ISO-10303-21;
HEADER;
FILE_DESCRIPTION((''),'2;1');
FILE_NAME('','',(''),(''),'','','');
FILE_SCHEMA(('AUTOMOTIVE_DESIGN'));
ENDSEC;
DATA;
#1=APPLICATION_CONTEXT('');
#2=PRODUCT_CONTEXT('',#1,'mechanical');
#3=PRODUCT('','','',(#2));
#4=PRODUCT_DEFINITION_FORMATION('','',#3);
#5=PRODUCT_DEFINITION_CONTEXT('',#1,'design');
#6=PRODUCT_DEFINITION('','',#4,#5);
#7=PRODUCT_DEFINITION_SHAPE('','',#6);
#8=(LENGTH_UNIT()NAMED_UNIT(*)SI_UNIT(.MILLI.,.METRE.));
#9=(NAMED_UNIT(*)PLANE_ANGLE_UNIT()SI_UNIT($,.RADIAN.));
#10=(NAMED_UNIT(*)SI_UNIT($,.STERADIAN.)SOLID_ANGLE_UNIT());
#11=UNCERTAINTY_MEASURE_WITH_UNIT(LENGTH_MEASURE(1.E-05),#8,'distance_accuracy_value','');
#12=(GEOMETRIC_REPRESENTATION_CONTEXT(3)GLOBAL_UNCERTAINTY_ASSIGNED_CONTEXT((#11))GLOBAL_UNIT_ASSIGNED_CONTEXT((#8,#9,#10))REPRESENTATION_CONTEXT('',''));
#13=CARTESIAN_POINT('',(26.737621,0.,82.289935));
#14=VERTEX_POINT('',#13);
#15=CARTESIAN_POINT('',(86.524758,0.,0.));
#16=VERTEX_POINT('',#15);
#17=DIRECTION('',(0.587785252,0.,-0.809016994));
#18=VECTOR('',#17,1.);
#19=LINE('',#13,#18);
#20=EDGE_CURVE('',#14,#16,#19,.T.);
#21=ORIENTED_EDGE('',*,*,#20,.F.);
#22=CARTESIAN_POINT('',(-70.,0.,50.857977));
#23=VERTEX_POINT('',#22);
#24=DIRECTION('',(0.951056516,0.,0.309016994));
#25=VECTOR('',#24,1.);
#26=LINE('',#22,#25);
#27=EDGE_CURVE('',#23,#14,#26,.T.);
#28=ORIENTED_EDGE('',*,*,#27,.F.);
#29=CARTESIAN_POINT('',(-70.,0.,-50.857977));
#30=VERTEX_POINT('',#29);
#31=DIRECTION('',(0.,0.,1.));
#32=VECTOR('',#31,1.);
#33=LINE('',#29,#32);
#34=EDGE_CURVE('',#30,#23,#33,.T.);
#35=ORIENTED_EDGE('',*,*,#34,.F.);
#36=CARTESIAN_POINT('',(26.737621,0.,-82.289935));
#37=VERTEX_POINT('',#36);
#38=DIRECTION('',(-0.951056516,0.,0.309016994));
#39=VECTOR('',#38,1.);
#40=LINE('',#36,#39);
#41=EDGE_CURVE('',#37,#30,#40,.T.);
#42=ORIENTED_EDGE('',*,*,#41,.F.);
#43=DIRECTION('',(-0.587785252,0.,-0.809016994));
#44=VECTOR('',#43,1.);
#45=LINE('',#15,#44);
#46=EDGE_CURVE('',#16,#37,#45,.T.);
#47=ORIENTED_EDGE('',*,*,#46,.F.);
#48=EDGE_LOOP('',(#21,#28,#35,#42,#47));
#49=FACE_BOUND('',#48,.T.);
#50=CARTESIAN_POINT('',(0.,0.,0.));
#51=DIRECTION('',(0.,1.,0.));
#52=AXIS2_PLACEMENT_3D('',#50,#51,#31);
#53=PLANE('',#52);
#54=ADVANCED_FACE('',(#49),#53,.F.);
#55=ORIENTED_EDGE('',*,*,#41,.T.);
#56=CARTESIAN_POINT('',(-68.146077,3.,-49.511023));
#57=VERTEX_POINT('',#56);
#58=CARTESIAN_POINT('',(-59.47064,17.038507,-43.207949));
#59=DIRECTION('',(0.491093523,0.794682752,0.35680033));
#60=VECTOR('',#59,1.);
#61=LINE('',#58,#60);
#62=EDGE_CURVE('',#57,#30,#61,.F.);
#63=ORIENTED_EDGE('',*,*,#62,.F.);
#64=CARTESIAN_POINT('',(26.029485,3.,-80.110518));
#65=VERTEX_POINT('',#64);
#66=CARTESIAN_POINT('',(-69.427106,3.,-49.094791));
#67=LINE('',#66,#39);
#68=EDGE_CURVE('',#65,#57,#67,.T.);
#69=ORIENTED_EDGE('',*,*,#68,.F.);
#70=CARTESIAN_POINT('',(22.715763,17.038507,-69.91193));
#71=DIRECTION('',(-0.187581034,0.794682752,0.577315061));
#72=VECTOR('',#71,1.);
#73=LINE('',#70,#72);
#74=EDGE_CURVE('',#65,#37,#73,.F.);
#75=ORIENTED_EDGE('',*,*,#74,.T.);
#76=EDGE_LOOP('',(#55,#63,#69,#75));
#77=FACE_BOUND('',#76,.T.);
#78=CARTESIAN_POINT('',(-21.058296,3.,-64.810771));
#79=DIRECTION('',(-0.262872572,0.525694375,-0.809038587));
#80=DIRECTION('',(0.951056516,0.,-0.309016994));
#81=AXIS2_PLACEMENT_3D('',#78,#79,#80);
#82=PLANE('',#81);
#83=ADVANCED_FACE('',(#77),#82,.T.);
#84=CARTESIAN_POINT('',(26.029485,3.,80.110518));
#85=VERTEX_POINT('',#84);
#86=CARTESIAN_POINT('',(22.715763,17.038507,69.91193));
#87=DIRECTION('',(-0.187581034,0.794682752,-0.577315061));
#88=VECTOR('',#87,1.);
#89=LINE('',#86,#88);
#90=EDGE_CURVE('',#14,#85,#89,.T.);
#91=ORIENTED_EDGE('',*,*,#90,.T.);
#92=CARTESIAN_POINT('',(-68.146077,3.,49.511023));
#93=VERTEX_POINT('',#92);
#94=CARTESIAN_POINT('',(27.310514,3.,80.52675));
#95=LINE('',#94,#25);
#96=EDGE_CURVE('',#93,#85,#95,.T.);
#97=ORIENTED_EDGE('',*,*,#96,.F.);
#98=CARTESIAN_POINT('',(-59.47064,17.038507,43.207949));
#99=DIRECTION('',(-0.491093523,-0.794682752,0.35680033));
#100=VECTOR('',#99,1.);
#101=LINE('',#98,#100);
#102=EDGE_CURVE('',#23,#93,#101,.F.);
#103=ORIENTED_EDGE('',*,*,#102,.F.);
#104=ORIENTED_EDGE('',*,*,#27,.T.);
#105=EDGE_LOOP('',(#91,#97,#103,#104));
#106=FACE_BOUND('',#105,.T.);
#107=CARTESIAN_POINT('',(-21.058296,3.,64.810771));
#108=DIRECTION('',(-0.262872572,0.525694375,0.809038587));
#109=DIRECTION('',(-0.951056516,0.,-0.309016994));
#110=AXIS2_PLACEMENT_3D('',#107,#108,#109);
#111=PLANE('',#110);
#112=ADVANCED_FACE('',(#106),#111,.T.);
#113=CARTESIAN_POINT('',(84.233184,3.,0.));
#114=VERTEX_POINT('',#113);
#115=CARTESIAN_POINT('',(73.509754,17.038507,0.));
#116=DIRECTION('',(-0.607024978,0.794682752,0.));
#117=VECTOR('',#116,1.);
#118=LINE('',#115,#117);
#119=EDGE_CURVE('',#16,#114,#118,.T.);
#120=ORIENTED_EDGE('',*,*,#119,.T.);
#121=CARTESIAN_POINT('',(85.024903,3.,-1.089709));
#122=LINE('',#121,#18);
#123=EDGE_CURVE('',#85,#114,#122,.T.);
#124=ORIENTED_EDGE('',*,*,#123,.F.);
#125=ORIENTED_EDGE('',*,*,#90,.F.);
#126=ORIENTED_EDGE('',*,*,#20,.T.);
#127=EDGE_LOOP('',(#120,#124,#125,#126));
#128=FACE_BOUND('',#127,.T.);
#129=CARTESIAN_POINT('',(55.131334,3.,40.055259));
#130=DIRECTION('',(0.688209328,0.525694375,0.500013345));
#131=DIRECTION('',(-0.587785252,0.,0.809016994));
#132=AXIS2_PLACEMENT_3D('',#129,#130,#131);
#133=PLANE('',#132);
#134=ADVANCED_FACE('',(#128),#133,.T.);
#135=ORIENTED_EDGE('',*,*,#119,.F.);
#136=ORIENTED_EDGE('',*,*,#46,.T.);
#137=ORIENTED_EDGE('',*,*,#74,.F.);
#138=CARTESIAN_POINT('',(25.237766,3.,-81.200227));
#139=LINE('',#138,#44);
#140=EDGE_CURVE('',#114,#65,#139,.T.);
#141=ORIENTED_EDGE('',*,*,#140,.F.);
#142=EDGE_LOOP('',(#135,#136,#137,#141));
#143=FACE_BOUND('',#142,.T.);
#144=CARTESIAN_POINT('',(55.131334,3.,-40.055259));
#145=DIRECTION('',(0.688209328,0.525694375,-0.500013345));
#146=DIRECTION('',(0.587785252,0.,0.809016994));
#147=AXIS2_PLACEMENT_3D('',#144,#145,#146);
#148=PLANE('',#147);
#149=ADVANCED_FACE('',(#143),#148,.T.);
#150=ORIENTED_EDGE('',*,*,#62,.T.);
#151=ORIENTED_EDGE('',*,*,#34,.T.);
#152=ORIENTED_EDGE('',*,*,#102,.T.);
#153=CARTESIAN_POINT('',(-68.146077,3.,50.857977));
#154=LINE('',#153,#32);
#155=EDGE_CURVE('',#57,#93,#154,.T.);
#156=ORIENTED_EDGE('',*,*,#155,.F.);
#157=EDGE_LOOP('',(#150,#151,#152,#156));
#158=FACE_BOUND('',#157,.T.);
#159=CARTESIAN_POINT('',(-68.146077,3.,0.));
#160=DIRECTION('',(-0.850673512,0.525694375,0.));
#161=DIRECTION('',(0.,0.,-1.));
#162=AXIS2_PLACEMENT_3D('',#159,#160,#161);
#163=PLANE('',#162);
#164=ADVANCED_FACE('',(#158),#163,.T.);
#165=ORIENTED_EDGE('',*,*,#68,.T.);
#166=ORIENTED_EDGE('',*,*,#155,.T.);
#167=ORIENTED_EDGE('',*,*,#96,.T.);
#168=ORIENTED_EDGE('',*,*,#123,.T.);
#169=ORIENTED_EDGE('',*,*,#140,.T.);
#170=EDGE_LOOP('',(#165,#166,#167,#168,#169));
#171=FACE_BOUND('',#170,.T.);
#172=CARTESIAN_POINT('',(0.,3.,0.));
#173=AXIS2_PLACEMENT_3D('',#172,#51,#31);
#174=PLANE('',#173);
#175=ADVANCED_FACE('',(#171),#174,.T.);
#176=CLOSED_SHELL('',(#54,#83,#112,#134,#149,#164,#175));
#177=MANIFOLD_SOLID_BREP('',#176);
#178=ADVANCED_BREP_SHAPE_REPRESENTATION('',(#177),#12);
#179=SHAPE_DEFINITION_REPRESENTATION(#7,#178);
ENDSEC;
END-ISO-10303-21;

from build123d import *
from OCP.BRepFilletAPI import BRepFilletAPI_MakeChamfer

# Parameters (mm, degrees)
BOSS_EXTRUDE1_DEPTH = 3
CHAMFER1_SIZE       = 3
CHAMFER1_SIZE_2     = 1.853922924


with BuildPart() as part:
    # Sketch1 → Boss-Extrude1 (new body)
    with BuildSketch(Plane(origin=(0, 0, 0), x_dir=(1, 0, 0), z_dir=(0, 1, 0))):
        Polygon((86.524758425, 0), (26.737620788, 82.289935321), (-70, 50.85797696), (-70, -50.85797696), (26.737620788, -82.289935321), align=None)
    extrude(amount=BOSS_EXTRUDE1_DEPTH)

    # Chamfer1
    chamfer1_edges_1 = [part.edges().sort_by_distance(p)[0] for p in [
        (-70, 3, 0),
    ]]
    chamfer1_side_1 = [part.faces().sort_by_distance(p)[0] for p in [
        (-70, 2.962921542, 0),
    ]]
    chamfer1_edges_2 = [part.edges().sort_by_distance(p)[0] for p in [
        (-21.631189606, 3, -66.573956141),
    ]]
    chamfer1_side_2 = [part.faces().sort_by_distance(p)[0] for p in [
        (-21.631189606, 2.962921542, -66.573956141),
    ]]
    chamfer1_edges_3 = [part.edges().sort_by_distance(p)[0] for p in [
        (56.631189606, 3, -41.14496766),
    ]]
    chamfer1_side_3 = [part.faces().sort_by_distance(p)[0] for p in [
        (56.631189606, 2.962921542, -41.14496766),
    ]]
    chamfer1_edges_4 = [part.edges().sort_by_distance(p)[0] for p in [
        (56.631189606, 3, 41.14496766),
    ]]
    chamfer1_side_4 = [part.faces().sort_by_distance(p)[0] for p in [
        (56.631189606, 2.962921542, 41.14496766),
    ]]
    chamfer1_edges_5 = [part.edges().sort_by_distance(p)[0] for p in [
        (-21.631189606, 3, 66.573956141),
    ]]
    chamfer1_side_5 = [part.faces().sort_by_distance(p)[0] for p in [
        (-21.631189606, 2.962921542, 66.573956141),
    ]]
    chamfer1 = BRepFilletAPI_MakeChamfer(part.part.solid().wrapped)
    for e in chamfer1_edges_1:
        chamfer1.Add(CHAMFER1_SIZE - 0.0001, CHAMFER1_SIZE_2 - 0.0001, e.wrapped, chamfer1_side_1[0].wrapped)
    for e in chamfer1_edges_2:
        chamfer1.Add(CHAMFER1_SIZE - 0.0001, CHAMFER1_SIZE_2 - 0.0001, e.wrapped, chamfer1_side_2[0].wrapped)
    for e in chamfer1_edges_3:
        chamfer1.Add(CHAMFER1_SIZE - 0.0001, CHAMFER1_SIZE_2 - 0.0001, e.wrapped, chamfer1_side_3[0].wrapped)
    for e in chamfer1_edges_4:
        chamfer1.Add(CHAMFER1_SIZE - 0.0001, CHAMFER1_SIZE_2 - 0.0001, e.wrapped, chamfer1_side_4[0].wrapped)
    for e in chamfer1_edges_5:
        chamfer1.Add(CHAMFER1_SIZE - 0.0001, CHAMFER1_SIZE_2 - 0.0001, e.wrapped, chamfer1_side_5[0].wrapped)
    add(Compound.cast(chamfer1.Shape()), mode=Mode.REPLACE)  # a hair under: the kernel refuses the full size


solid = part.part
